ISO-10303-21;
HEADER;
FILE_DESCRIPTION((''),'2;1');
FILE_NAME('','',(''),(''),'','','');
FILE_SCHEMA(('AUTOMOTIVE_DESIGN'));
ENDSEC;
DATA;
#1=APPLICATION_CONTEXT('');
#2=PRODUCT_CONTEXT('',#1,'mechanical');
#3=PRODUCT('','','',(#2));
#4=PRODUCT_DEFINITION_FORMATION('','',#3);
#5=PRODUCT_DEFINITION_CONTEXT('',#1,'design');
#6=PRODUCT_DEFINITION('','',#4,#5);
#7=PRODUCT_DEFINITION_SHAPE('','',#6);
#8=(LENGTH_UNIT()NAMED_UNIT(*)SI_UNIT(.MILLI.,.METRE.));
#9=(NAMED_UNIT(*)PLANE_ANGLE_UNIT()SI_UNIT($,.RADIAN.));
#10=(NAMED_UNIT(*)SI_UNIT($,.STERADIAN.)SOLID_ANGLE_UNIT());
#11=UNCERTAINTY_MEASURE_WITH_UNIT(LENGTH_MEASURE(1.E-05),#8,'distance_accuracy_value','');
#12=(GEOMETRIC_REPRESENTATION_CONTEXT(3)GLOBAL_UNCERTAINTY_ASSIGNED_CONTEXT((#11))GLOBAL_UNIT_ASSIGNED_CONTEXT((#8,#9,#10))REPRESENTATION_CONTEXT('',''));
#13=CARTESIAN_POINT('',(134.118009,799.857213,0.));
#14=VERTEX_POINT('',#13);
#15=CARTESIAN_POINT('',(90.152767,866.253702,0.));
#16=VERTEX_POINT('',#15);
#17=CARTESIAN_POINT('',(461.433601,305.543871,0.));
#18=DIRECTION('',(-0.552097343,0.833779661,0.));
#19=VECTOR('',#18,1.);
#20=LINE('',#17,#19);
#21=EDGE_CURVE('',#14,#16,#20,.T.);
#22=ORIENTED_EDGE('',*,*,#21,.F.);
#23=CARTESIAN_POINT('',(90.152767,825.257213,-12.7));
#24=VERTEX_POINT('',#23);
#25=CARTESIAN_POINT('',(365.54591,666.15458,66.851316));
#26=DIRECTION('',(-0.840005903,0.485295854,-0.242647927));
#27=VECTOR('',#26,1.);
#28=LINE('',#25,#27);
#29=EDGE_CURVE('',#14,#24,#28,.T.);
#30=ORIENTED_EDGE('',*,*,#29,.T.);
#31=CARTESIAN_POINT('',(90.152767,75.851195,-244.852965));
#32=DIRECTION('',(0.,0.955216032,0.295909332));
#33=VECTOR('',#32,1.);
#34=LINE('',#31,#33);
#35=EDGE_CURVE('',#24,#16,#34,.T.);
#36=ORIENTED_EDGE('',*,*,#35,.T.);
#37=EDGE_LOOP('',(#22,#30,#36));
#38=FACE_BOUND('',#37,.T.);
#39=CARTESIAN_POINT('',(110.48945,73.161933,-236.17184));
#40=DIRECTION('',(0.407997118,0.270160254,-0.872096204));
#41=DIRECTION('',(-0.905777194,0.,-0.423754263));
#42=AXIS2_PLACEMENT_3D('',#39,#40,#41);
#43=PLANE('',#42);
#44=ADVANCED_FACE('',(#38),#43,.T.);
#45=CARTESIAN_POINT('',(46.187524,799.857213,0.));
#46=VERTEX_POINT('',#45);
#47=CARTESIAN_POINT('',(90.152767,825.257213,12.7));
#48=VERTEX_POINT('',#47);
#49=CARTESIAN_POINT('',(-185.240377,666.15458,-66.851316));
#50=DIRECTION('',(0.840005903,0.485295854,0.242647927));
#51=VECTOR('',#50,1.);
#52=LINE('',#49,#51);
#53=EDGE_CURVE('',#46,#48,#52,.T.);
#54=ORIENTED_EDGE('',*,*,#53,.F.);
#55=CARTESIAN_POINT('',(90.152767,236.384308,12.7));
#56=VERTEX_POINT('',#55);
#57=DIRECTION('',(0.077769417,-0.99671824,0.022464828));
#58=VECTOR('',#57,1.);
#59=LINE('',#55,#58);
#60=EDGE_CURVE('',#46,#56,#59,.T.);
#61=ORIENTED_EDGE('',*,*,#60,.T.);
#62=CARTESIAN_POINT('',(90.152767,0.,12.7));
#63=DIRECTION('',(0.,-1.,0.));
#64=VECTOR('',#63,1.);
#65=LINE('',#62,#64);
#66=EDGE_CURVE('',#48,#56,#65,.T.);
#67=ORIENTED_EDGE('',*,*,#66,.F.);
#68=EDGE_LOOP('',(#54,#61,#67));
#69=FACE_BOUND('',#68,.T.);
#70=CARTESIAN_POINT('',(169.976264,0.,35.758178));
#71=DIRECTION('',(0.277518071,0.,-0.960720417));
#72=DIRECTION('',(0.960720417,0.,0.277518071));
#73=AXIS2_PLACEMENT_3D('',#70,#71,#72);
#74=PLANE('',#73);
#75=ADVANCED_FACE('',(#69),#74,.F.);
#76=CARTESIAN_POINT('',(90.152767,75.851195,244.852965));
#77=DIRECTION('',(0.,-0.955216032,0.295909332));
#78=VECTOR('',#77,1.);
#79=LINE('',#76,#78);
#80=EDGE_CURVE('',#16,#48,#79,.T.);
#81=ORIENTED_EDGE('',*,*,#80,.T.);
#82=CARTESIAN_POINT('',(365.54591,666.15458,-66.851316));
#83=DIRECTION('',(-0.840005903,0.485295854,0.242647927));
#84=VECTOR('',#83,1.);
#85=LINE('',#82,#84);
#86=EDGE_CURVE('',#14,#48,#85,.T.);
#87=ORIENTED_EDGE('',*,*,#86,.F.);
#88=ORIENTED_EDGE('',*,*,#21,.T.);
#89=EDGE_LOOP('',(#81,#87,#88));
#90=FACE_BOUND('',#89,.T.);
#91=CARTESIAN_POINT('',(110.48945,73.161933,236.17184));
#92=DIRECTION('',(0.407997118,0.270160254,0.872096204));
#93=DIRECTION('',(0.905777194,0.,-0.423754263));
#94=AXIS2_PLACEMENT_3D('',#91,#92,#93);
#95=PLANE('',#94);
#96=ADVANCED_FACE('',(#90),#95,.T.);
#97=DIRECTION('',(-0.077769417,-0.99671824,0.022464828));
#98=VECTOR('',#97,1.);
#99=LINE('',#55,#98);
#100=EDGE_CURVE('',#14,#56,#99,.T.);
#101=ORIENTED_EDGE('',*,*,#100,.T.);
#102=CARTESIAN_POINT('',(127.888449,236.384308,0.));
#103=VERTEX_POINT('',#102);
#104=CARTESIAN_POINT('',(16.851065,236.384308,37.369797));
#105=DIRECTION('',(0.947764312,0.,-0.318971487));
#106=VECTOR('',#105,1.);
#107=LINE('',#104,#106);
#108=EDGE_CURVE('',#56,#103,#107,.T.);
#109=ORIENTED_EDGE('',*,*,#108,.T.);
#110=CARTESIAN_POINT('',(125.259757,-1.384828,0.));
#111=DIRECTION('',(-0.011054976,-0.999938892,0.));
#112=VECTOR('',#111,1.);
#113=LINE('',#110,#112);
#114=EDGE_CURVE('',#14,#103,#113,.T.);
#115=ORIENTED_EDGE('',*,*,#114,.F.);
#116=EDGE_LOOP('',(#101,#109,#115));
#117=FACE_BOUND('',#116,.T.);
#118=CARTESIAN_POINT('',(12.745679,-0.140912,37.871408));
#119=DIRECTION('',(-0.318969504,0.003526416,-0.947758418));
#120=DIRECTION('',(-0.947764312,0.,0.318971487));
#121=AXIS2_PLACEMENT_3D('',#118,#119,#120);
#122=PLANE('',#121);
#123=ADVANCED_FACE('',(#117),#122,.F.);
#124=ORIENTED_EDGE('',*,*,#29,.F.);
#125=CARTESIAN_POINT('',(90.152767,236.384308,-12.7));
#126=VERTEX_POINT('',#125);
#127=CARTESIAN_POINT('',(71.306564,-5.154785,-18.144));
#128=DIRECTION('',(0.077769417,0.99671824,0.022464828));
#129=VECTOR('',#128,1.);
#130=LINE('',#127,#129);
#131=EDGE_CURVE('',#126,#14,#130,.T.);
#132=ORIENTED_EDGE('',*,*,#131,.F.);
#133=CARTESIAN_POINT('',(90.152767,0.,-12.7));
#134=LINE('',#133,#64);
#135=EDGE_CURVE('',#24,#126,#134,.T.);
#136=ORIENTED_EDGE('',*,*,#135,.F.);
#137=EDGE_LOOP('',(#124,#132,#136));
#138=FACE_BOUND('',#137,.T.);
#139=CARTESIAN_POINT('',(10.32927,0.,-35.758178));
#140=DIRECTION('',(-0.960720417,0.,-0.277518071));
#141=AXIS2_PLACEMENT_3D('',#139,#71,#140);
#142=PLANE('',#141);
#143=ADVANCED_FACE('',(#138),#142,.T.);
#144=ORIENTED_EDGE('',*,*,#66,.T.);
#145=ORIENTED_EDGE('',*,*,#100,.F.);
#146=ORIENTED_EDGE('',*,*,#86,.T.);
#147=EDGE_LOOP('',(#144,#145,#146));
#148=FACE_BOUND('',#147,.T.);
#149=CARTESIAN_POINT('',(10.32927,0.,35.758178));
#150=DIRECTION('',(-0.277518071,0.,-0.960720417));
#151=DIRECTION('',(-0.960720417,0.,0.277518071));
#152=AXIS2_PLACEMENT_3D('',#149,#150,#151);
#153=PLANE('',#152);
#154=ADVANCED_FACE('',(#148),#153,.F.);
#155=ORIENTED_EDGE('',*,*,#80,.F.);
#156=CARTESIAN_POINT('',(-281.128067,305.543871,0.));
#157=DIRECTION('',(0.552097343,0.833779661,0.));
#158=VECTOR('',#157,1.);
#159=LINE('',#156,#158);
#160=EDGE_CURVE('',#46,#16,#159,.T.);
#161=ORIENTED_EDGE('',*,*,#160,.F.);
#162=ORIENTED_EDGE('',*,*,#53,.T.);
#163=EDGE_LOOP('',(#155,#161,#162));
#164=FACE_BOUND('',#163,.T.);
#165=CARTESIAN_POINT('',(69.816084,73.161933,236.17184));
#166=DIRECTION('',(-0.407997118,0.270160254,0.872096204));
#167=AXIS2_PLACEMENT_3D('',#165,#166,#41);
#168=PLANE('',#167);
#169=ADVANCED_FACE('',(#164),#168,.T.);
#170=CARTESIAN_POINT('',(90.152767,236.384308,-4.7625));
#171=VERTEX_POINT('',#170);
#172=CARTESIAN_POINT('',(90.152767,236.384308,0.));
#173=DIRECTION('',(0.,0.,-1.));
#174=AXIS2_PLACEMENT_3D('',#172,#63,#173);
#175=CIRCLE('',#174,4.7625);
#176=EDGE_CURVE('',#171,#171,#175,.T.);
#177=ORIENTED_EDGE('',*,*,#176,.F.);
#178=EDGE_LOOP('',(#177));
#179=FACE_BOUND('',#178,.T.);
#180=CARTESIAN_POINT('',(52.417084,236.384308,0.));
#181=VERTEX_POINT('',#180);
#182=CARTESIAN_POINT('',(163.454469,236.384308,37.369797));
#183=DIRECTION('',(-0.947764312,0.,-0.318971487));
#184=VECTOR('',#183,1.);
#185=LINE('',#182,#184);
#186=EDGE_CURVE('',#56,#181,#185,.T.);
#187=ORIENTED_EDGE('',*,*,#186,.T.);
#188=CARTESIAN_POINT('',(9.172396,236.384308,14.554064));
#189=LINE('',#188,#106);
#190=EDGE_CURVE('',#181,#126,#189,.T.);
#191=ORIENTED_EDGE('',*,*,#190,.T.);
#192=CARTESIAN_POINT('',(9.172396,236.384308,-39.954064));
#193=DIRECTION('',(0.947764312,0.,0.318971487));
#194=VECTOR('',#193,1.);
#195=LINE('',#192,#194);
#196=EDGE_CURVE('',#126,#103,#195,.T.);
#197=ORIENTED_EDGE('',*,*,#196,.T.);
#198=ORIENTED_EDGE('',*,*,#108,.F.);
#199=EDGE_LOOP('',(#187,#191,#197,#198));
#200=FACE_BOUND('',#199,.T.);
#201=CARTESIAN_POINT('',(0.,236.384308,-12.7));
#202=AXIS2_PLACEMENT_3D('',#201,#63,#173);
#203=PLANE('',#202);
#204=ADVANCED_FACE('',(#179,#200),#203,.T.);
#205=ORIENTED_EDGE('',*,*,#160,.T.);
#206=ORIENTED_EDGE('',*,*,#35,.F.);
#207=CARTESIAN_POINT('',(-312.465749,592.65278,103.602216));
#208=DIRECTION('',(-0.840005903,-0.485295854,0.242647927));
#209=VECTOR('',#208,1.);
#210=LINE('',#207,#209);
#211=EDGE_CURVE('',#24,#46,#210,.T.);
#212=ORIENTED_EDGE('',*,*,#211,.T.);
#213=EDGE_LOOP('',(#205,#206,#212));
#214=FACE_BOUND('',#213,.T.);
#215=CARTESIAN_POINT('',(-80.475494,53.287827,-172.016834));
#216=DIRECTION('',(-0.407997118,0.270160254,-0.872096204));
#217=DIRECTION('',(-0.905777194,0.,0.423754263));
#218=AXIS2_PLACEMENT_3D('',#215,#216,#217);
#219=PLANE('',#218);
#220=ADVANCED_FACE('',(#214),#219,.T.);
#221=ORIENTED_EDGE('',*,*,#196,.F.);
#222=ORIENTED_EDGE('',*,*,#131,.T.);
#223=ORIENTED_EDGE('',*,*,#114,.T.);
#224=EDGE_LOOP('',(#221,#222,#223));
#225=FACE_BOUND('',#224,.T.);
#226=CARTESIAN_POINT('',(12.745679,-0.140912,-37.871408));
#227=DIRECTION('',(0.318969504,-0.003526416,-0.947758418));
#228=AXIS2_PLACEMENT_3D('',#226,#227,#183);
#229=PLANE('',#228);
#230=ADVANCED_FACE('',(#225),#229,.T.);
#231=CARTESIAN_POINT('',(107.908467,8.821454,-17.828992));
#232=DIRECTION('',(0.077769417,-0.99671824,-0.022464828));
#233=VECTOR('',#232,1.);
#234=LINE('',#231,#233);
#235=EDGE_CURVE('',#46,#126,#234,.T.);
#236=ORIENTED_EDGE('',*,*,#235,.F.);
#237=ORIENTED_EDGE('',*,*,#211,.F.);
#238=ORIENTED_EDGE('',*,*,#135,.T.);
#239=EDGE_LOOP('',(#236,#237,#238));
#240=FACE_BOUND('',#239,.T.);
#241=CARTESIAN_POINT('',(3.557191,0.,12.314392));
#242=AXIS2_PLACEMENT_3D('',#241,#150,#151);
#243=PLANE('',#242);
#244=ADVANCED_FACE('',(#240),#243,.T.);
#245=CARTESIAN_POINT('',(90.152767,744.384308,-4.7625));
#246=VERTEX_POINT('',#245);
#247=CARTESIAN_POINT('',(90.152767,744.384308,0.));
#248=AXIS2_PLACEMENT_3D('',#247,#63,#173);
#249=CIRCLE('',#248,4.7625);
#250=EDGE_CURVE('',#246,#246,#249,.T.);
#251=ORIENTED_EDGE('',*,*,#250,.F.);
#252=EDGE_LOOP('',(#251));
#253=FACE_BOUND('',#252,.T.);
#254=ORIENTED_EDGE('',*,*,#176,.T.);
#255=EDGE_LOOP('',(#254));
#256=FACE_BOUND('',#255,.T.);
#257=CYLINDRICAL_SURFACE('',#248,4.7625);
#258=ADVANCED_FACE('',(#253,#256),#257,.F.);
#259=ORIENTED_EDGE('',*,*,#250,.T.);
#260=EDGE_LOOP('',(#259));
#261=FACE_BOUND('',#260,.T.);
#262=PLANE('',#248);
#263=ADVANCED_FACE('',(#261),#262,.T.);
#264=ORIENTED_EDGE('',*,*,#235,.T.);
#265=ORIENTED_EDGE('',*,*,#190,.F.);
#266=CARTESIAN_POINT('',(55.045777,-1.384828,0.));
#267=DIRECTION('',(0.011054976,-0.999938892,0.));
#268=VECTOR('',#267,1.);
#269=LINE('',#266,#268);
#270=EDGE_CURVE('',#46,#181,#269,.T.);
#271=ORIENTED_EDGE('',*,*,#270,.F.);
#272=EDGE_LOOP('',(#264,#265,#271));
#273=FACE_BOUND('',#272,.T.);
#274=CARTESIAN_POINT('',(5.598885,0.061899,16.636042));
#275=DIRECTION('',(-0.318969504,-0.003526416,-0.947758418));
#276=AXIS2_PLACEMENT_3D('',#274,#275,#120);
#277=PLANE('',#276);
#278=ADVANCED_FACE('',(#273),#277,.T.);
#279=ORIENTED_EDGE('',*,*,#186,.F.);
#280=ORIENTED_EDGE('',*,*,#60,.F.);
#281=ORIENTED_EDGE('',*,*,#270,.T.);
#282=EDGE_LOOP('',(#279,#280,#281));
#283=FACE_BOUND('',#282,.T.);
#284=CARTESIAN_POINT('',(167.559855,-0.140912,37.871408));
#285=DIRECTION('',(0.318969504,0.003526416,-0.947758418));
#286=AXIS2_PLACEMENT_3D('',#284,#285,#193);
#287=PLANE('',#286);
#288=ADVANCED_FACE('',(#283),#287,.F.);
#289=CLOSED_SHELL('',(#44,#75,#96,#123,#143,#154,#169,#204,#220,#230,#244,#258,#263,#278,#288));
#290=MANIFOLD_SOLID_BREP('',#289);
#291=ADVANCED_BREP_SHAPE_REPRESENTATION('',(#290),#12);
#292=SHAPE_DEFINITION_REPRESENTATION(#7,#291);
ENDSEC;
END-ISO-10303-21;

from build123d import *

# Parameters (mm, degrees)
BOSS_EXTRUDE1_DEPTH = 12.7
SKETCH6_W           = 114.815330755
SKETCH6_H           = 104.276185761
CUT_EXTRUDE3_DEPTH  = 12.7
SKETCH7_W           = 122.360161844
SKETCH7_H           = 106.085242249
CUT_EXTRUDE4_DEPTH  = 12.7
CUT_EXTRUDE5_DEPTH  = 877.31520365
SKETCH9_W           = 128.341826347
SKETCH9_H           = 668.528804507
CUT_EXTRUDE6_DEPTH  = 877.394501708
SKETCH10_W          = 113.997044676
SKETCH10_H          = 648.207852324
CUT_EXTRUDE7_DEPTH  = 876.98732182
SKETCH12_W          = 87.20410609
SKETCH12_H          = 734.299119323
CUT_EXTRUDE9_DEPTH  = 868.461646496
SKETCH14_W          = 100.100558247
SKETCH14_H          = 114.490742636
CUT_EXTRUDE10_DEPTH = 12.7
SKETCH15_W          = 127.653675673
SKETCH15_H          = 100.172241776
CUT_EXTRUDE11_DEPTH = 861.862470972
SKETCH16_W          = 131.855297217
SKETCH16_H          = 679.360405527
CUT_EXTRUDE12_DEPTH = 877.165513574
SKETCH17_W          = 119.305490094
SKETCH17_H          = 642.509473181
CUT_EXTRUDE13_DEPTH = 877.394501708
SKETCH18_W          = 98.994393467
SKETCH18_H          = 639.457225447
CUT_EXTRUDE14_DEPTH = 877.31520365
SKETCH19_W          = 99.565921338
SKETCH19_H          = 666.000675121
CUT_EXTRUDE15_DEPTH = 877.394501708
SKETCH20_R          = 4.7625
CUT_EXTRUDE16_DEPTH = 508


# Read off the part's stored shape, not the designer's step: Mirror1
with BuildPart() as part:
    # Sketch1 → Boss-Extrude1 (new, symmetric)
    with BuildSketch(Plane.XY):
        Polygon((52.417084438, 236.384308448), (90.152766869, 236.384308448), (90.152766869, 866.253701631), (46.187524325, 799.857212891), align=None)
        Polygon((90.152766869, 866.253701631), (90.152766869, 236.384308448), (127.8884493, 236.384308448), (134.118009413, 799.857212891), align=None)
    extrude(amount=BOSS_EXTRUDE1_DEPTH, both=True)

    # Sketch6 → Cut-Extrude3 (cut)
    with BuildSketch(Plane(origin=(-80.475493735, 53.287826933, 172.016834397), x_dir=(-0.9129832156192912, -0.12073015458483159, -0.3897253876402993), z_dir=(0.4079971176337633, -0.27016025356830164, -0.8720962042082583))):
        with Locations((-159.579476902, 801.401673743)):
            Rectangle(SKETCH6_W, SKETCH6_H)
    extrude(amount=-CUT_EXTRUDE3_DEPTH, mode=Mode.SUBTRACT)

    # Sketch7 → Cut-Extrude4 (cut)
    with BuildSketch(Plane(origin=(110.489450025, 73.161933124, 236.171839964), x_dir=(0.9129832156192915, -0.12073015458482926, -0.3897253876402993), z_dir=(0.4079971176337626, 0.2701602535682969, 0.8720962042082602))):
        with Locations((1.839292518, 801.972236913)):
            Rectangle(SKETCH7_W, SKETCH7_H)
    extrude(amount=CUT_EXTRUDE4_DEPTH, mode=Mode.SUBTRACT)

    # Sketch8 → Cut-Extrude5 (cut, through all)
    with BuildSketch(Plane(origin=(12.74567879, -0.140911784, 37.871408439), x_dir=(0.947764978993365, 0.0011868122313308312, -0.31896729623965236), z_dir=(0.31896950417509595, -0.0035264157067469155, 0.9477584184793911))):
        Polygon((81.673294324, 236.429925956), (128.061632698, 799.851676208), (231.741614255, 799.851676208), (231.741614255, 224.074314905), align=None)
    extrude(amount=CUT_EXTRUDE5_DEPTH, mode=Mode.SUBTRACT)

    # Sketch9 → Cut-Extrude6 (cut, through all)
    with BuildSketch(Plane(origin=(10.329270127, 0, 35.75817846), x_dir=(-0.9607204173379366, 0, 0.27751807096119224), z_dir=(-0.27751807096119224, 0, -0.9607204173379366))):
        with Locations((-110.06191607, 531.852930857)):
            Rectangle(SKETCH9_W, SKETCH9_H)
    extrude(amount=-CUT_EXTRUDE6_DEPTH, mode=Mode.SUBTRACT)

    # Sketch10 → Cut-Extrude7 (cut, through all)
    with BuildSketch(Plane(origin=(6.175448175, 0.216498836, -18.349193008), x_dir=(-0.9477710226369341, 0.0037629901372113698, -0.3189293472776808), z_dir=(0.31895154592781055, 0.011181801925878497, -0.9477050588954087))):
        with Locations((-63.898815232, 515.571273572)):
            Rectangle(SKETCH10_W, SKETCH10_H)
    extrude(amount=-CUT_EXTRUDE7_DEPTH, mode=Mode.SUBTRACT)

    # Sketch12 → Cut-Extrude9 (cut, through all)
    with BuildSketch(Plane(origin=(90.152766869, 0, 0), x_dir=(0, 0, -1), z_dir=(1, 0, 0))):
        with Locations((-8.892958554, 531.759474075)):
            Rectangle(SKETCH12_W, SKETCH12_H)
    extrude(amount=-CUT_EXTRUDE9_DEPTH, mode=Mode.SUBTRACT)

    # Mirror1: part across plane


with BuildPart() as part_1:
    add(part.part)
    add(part.part.mirror(Plane.ZY.offset(-90.152766869)))

    # Sketch14 → Cut-Extrude10 (cut)
    with BuildSketch(Plane(origin=(110.489450025, 73.161933124, -236.171839964), x_dir=(0.9129832156192876, -0.12073015458483696, 0.3897253876403062), z_dir=(-0.40799711763377144, -0.2701602535683071, 0.8720962042082528))):
        with Locations((-13.369077843, 796.553249818)):
            Rectangle(SKETCH14_W, SKETCH14_H)
    extrude(amount=-CUT_EXTRUDE10_DEPTH, mode=Mode.SUBTRACT)

    # Sketch15 → Cut-Extrude11 (cut, through all)
    with BuildSketch(Plane(origin=(-80.475493735, 53.287826933, -172.016834397), x_dir=(-0.9129832156192877, -0.12073015458483585, 0.3897253876403061), z_dir=(-0.4079971176337711, 0.270160253568305, -0.8720962042082536))):
        with Locations((-157.367388135, 783.503693327)):
            Rectangle(SKETCH15_W, SKETCH15_H)
    extrude(amount=CUT_EXTRUDE11_DEPTH, mode=Mode.SUBTRACT)

    # Sketch16 → Cut-Extrude12 (cut, through all)
    with BuildSketch(Plane(origin=(5.598884712, 0.061899319, 16.636042161), x_dir=(0.9477649789933651, -0.0011868122313305589, -0.3189672962396519), z_dir=(0.31896950417509556, 0.0035264157067461093, 0.9477584184793914))):
        with Locations((56.359358162, 528.47269788)):
            Rectangle(SKETCH16_W, SKETCH16_H)
    extrude(amount=-CUT_EXTRUDE12_DEPTH, mode=Mode.SUBTRACT)

    # Sketch17 → Cut-Extrude13 (cut, through all)
    with BuildSketch(Plane(origin=(3.557191293, 0, 12.314391965), x_dir=(0.9607204173379333, 0, -0.27751807096120285), z_dir=(0.27751807096120285, 0, 0.9607204173379335))):
        with Locations((80.7028718, 538.35243952)):
            Rectangle(SKETCH17_W, SKETCH17_H)
    extrude(amount=-CUT_EXTRUDE13_DEPTH, mode=Mode.SUBTRACT)

    # Sketch18 → Cut-Extrude14 (cut, through all)
    with BuildSketch(Plane(origin=(12.74567879, -0.140911784, -37.871408439), x_dir=(-0.9477649789933651, -0.001186812231330454, -0.31896729623965203), z_dir=(0.31896950417509573, -0.0035264157067457975, -0.9477584184793914))):
        with Locations((-106.935938294, 529.421515118)):
            Rectangle(SKETCH18_W, SKETCH18_H)
    extrude(amount=CUT_EXTRUDE14_DEPTH, mode=Mode.SUBTRACT)

    # Sketch19 → Cut-Extrude15 (cut, through all)
    with BuildSketch(Plane(origin=(10.329270127, 0, -35.75817846), x_dir=(0.9607204173379326, 0, 0.2775180709612057), z_dir=(-0.2775180709612056, 0, 0.9607204173379325))):
        with Locations((102.080018676, 535.484996681)):
            Rectangle(SKETCH19_W, SKETCH19_H)
    extrude(amount=-CUT_EXTRUDE15_DEPTH, mode=Mode.SUBTRACT)

    # Sketch20 → Cut-Extrude16 (cut)
    with BuildSketch(Plane.XZ.offset(-236.384308448)):
        with Locations(Location((90.152766869, 0, 0), (0, 0, 270))):
            Circle(SKETCH20_R)
    extrude(amount=-CUT_EXTRUDE16_DEPTH, mode=Mode.SUBTRACT)


solid = part_1.part
